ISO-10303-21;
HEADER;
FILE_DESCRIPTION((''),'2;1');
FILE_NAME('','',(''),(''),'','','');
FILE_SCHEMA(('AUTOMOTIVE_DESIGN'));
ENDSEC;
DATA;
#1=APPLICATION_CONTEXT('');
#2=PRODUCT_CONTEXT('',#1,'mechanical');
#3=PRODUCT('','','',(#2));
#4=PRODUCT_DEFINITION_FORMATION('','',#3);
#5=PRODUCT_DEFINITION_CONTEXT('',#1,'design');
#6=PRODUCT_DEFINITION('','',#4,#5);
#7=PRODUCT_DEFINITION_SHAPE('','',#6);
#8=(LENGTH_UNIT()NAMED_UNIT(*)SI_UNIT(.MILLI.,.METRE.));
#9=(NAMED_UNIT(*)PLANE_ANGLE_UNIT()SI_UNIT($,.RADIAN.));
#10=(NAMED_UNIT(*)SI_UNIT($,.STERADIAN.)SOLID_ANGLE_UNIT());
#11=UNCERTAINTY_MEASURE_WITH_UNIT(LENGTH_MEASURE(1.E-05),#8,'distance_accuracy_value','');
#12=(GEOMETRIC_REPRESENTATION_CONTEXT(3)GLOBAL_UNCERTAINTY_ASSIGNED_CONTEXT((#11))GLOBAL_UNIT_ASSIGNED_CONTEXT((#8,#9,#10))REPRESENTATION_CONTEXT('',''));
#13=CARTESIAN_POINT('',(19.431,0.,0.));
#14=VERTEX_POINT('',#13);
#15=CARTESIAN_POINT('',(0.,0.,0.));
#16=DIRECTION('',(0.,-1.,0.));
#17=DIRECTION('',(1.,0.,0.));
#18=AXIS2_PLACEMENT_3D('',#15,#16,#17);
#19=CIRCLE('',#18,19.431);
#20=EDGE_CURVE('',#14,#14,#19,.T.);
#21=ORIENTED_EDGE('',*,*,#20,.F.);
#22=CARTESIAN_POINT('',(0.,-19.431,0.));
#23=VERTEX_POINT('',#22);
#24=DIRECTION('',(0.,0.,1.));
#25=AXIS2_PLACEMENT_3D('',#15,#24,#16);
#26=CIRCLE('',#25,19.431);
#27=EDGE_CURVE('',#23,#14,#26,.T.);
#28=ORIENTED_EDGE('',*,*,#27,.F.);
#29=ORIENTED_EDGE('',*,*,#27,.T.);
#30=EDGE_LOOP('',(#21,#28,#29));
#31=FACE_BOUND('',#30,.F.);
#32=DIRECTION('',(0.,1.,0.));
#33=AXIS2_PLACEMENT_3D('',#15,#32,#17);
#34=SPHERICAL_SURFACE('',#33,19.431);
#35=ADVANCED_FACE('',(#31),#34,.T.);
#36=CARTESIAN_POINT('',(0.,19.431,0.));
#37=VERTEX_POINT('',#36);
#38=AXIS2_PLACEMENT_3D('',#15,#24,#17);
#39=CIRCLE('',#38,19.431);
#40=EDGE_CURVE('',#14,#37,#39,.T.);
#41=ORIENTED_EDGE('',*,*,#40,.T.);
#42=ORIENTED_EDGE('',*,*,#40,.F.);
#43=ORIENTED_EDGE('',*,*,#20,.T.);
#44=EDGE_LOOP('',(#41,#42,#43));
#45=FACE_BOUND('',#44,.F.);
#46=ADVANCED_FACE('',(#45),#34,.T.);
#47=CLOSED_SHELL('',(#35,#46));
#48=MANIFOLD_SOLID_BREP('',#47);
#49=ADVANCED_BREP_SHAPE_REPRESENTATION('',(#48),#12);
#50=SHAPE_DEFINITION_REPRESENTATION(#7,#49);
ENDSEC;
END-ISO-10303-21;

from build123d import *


with BuildPart() as f1:
    # F0 (on Top) → F1 (revolve)
    with BuildSketch(Plane.XY):
        with BuildLine():
            ThreePointArc((0, -19.431), (13.7397918652, -13.7397918652), (19.431, 0))
            ThreePointArc((19.431, 0), (13.7397918652, 13.7397918652), (0, 19.431))
            Line((0, 19.431), (0, 0))
            Line((0, 0), (0, -19.431))
        make_face()
    revolve(axis=Axis((0, 0, 0), (0, -1, 0)))


solid = f1.part
